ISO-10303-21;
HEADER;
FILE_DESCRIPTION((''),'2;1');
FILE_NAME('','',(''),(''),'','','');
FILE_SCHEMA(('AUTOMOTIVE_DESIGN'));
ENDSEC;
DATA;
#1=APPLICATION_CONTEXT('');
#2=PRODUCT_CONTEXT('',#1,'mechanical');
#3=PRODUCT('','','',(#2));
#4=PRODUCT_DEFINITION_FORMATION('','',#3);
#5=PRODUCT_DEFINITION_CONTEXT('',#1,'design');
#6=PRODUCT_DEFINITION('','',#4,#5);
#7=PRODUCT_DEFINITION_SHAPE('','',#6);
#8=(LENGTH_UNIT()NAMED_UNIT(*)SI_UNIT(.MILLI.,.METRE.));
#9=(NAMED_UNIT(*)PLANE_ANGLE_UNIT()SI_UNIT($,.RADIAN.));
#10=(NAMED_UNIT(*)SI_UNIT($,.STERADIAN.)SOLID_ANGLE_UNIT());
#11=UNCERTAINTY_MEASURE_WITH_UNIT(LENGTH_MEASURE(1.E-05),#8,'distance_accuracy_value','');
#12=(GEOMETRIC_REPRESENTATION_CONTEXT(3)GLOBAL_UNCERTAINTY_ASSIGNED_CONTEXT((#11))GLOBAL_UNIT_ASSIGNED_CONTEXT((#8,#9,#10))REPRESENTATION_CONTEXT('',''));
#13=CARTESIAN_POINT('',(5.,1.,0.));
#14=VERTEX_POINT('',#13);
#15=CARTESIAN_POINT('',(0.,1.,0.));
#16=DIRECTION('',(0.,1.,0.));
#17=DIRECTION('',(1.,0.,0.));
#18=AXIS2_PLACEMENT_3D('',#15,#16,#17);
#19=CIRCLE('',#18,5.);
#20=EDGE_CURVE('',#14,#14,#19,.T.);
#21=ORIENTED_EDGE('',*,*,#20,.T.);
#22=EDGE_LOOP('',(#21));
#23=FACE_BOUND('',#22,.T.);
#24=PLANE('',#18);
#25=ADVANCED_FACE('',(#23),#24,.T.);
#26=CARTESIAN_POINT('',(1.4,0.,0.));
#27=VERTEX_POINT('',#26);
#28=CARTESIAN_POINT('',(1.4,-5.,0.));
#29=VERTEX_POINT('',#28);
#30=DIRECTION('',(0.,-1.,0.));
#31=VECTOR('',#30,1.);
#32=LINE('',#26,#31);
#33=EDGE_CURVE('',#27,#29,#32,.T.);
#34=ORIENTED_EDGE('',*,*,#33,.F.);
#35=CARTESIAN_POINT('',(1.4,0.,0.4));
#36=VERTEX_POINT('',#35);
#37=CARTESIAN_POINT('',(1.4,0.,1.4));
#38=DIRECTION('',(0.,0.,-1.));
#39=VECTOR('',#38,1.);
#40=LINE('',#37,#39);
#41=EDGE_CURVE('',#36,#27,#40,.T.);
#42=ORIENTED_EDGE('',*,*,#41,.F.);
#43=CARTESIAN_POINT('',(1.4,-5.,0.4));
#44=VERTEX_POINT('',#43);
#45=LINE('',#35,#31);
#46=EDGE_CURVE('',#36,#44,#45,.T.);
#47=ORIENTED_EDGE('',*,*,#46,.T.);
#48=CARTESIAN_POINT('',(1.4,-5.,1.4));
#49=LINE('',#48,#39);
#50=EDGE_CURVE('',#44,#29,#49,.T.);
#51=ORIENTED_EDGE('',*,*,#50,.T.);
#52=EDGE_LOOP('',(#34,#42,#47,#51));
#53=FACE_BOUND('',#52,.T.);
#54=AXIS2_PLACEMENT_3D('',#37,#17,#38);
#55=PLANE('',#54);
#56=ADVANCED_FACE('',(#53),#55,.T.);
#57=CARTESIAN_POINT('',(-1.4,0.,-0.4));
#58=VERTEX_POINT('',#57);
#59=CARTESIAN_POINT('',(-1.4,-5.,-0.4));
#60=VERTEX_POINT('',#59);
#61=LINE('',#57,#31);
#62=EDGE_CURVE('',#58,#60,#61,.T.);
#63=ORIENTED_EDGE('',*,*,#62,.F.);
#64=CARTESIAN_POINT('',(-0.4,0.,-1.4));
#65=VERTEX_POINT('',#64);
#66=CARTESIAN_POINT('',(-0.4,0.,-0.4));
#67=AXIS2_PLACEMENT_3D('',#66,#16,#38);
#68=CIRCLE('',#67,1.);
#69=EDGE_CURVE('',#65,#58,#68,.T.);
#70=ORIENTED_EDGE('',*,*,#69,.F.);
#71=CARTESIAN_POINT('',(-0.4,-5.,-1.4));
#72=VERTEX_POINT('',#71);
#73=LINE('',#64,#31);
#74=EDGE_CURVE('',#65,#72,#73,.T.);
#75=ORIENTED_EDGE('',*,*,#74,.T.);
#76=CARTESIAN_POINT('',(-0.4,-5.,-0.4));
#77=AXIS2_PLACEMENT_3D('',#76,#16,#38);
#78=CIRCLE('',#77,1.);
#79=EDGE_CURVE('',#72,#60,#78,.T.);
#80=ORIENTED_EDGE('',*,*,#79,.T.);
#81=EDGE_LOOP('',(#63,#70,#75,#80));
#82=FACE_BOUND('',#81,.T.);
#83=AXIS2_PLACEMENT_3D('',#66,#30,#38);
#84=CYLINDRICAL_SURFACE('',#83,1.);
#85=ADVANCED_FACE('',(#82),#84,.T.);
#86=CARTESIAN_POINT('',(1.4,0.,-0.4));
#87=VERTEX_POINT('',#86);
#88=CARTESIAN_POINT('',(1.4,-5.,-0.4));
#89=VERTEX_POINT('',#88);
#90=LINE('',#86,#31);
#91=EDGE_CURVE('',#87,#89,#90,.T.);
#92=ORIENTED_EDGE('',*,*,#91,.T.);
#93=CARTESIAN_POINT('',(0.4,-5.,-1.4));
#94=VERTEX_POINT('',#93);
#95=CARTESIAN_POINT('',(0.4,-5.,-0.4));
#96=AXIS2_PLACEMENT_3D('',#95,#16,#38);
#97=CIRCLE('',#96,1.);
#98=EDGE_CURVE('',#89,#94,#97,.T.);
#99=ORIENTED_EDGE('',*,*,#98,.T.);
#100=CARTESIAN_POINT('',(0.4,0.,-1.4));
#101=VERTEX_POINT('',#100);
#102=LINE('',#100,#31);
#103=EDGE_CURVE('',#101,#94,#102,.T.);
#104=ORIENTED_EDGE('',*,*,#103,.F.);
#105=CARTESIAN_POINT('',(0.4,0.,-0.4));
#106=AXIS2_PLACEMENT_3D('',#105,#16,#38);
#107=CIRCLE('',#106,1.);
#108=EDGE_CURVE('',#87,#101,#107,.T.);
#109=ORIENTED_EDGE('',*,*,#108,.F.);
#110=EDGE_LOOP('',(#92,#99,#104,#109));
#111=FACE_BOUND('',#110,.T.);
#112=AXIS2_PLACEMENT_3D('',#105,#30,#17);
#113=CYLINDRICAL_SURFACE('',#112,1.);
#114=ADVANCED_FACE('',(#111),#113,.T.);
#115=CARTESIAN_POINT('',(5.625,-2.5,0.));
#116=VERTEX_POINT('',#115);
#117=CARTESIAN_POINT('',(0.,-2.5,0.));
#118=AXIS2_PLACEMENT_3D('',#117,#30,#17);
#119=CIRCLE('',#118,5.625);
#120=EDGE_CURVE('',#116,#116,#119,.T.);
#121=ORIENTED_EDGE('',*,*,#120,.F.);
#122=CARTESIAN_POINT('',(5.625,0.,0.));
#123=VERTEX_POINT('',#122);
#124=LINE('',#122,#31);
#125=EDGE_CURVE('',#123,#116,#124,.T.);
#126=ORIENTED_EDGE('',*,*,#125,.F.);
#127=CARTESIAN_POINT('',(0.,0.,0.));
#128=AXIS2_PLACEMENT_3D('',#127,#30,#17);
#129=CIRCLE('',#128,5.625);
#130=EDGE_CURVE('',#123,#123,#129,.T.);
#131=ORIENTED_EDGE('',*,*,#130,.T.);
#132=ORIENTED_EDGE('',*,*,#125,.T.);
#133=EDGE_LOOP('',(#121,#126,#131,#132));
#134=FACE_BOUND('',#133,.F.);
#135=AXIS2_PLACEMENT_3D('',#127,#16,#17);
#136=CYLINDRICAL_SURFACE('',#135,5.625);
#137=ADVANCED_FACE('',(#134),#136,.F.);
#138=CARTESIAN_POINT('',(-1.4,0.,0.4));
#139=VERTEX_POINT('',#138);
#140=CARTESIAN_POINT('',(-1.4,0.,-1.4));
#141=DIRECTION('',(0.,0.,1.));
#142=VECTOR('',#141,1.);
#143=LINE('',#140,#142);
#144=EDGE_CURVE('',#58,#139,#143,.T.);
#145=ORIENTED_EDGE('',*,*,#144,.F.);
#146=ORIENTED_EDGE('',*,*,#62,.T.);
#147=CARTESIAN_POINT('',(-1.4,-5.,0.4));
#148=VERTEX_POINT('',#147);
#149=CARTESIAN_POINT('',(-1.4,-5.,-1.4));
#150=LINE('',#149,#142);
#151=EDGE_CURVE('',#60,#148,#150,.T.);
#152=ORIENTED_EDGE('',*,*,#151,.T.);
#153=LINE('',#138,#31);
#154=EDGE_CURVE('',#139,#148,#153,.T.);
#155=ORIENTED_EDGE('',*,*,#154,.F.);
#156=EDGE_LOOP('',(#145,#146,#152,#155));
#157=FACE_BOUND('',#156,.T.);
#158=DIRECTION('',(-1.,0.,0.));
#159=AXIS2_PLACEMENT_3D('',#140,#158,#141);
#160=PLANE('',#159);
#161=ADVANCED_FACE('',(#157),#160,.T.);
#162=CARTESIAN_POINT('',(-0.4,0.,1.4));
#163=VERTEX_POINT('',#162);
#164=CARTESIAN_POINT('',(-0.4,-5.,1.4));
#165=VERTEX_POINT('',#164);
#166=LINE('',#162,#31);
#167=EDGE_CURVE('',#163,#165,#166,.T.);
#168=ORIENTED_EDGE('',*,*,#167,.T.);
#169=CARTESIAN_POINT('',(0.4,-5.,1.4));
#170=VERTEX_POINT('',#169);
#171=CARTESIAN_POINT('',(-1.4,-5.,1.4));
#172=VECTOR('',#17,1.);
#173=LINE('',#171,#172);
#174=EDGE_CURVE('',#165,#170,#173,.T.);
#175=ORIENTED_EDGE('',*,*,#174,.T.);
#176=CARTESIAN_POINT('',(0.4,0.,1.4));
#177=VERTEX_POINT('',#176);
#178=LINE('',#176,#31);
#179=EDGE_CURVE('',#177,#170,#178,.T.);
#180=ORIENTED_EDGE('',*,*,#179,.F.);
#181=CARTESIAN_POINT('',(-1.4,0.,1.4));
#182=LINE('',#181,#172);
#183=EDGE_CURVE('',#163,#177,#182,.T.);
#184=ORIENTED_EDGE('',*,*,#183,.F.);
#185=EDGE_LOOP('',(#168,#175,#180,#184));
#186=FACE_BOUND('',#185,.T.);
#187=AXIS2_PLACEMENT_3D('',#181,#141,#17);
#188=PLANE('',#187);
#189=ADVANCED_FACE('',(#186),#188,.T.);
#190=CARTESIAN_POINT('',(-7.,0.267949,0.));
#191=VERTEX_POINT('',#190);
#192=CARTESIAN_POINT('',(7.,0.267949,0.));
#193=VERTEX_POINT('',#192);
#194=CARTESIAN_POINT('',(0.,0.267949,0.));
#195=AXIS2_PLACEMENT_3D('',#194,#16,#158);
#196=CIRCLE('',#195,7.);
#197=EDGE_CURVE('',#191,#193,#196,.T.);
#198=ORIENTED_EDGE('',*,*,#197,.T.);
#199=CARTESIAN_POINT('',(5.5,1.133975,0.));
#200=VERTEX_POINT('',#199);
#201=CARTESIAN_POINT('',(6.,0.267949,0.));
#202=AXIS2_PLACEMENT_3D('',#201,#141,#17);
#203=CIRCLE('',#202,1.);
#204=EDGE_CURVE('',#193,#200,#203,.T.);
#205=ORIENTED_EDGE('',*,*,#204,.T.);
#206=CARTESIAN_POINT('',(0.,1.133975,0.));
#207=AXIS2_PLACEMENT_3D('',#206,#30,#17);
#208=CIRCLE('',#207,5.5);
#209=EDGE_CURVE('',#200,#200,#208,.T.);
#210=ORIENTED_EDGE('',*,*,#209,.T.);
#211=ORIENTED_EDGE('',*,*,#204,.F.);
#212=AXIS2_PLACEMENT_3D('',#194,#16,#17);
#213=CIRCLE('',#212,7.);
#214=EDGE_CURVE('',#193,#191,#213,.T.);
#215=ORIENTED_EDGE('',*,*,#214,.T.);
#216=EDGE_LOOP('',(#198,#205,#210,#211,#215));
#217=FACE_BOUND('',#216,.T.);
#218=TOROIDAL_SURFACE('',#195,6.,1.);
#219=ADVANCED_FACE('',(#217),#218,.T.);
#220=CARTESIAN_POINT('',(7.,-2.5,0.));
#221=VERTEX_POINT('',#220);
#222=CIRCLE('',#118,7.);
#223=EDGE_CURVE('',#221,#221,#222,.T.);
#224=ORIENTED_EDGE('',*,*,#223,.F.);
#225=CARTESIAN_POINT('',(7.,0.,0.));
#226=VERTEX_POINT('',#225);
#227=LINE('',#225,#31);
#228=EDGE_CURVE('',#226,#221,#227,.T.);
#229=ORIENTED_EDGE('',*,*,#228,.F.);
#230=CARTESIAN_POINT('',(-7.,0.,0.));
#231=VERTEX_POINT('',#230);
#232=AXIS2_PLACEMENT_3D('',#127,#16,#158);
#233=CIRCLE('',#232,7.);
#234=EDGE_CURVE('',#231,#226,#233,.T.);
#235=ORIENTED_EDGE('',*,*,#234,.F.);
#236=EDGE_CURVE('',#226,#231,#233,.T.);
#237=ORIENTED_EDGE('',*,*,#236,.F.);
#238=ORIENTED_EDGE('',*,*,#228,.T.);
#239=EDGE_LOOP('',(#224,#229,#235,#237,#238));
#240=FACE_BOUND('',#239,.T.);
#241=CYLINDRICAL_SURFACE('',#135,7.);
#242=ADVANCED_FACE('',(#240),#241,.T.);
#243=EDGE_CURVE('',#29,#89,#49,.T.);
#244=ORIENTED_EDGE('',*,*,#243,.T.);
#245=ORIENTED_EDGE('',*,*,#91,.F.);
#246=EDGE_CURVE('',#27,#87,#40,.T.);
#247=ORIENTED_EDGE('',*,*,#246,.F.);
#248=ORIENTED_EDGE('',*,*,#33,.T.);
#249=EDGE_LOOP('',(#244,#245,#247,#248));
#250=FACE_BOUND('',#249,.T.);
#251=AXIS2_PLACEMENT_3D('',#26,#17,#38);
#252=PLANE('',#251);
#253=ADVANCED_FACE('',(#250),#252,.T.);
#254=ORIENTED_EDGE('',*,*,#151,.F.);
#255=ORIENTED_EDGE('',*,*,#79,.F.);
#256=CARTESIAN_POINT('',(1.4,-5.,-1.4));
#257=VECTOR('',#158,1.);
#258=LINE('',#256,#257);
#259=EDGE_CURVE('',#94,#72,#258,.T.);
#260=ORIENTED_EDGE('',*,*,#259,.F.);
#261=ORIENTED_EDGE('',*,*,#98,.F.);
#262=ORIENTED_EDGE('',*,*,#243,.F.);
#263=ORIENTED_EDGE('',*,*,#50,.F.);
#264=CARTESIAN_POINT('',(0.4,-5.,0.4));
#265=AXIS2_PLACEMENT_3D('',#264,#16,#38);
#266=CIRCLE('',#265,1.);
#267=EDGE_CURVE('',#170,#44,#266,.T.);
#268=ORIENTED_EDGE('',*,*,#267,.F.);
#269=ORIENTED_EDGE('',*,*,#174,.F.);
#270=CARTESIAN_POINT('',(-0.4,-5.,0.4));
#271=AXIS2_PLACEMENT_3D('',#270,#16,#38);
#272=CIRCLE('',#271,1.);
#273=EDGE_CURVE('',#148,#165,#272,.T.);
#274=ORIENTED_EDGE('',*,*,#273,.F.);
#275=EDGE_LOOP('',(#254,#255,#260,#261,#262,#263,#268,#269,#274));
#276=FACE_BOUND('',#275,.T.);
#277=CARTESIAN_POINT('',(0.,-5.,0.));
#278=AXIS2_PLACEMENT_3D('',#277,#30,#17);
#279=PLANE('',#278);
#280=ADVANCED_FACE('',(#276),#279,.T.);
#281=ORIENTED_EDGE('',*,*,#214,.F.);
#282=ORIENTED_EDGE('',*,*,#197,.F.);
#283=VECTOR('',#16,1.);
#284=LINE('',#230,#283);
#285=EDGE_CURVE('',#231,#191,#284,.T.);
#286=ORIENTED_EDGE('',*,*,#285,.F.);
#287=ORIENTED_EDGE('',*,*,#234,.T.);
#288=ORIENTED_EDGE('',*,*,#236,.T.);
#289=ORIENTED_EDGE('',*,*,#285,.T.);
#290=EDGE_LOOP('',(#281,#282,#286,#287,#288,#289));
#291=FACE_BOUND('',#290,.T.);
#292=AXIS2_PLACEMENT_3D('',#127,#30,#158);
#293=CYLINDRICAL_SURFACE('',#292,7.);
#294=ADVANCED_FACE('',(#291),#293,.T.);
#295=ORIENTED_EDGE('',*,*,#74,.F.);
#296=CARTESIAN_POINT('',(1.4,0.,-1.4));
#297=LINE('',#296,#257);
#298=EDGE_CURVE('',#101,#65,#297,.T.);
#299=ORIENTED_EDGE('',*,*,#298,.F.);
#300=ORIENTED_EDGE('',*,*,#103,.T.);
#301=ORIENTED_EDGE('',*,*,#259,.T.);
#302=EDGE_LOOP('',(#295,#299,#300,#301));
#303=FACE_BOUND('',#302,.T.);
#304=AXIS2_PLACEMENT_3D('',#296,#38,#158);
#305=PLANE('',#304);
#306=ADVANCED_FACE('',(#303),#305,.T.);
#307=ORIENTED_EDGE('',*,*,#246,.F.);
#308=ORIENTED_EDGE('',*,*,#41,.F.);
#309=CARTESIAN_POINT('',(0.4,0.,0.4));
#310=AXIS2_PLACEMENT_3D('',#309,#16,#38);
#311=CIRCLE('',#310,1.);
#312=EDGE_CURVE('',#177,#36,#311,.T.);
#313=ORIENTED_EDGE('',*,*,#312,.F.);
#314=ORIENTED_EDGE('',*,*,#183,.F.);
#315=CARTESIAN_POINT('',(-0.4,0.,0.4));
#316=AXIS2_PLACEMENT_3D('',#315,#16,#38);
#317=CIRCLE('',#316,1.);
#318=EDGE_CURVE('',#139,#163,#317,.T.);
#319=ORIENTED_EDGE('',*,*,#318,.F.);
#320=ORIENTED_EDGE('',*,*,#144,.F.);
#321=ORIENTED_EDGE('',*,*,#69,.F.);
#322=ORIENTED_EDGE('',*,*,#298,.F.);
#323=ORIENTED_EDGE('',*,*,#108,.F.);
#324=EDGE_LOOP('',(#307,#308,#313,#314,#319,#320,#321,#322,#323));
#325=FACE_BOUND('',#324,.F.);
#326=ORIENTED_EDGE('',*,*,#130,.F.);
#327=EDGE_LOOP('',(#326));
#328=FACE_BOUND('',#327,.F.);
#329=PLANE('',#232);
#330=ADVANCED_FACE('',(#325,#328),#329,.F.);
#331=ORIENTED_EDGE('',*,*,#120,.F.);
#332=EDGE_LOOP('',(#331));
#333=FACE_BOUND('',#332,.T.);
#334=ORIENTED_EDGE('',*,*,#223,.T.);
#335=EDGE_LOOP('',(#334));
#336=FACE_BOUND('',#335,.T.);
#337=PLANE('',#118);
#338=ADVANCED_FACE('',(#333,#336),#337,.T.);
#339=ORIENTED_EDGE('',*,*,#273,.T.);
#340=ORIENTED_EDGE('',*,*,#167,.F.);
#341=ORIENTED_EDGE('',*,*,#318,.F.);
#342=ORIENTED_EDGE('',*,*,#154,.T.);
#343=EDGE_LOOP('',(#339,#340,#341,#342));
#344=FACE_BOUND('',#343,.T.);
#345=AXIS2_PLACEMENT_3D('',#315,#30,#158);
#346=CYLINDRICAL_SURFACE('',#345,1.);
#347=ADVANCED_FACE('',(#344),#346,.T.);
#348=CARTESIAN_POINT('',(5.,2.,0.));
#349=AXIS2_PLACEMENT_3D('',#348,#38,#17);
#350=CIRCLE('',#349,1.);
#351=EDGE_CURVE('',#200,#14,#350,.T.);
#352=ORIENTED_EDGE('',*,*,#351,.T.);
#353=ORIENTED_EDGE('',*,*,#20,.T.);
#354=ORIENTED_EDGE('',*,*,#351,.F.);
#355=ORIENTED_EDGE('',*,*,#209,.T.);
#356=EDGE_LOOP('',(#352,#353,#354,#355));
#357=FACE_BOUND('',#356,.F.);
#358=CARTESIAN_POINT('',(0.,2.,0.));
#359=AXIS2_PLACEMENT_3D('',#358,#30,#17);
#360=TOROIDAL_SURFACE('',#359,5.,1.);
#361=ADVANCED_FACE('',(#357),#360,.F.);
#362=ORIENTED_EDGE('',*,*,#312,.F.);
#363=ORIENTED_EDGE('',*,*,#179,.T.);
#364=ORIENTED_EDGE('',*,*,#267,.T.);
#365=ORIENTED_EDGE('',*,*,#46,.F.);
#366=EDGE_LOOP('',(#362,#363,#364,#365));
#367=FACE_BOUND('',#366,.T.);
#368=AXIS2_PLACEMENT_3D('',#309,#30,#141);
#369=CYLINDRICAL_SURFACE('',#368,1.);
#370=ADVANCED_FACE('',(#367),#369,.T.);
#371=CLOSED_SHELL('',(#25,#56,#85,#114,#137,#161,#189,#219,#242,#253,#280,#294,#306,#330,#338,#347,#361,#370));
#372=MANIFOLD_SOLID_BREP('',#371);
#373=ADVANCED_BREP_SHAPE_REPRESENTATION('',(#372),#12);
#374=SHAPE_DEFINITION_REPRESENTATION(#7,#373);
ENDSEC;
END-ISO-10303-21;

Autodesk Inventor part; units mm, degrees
ref_plane "YZ Plane" through (0, 0, 0) normal (1, 0, 0) x (0, 1, 0)
ref_plane "XZ Plane" through (0, 0, 0) normal (0, 1, 0) x (-1, 0, 0)
ref_plane "XY Plane" through (0, 0, 0) normal (0, 0, 1) x (1, 0, 0)
sketch "Boceto1" plane through (0, 0, 0) normal (0, 1, 0) x (-1, 0, 0)
  circle A0 centre (0, 0) radius 7
  dimension "d0" = 14
extrude "Extrusión1" add sketch "Boceto1" along normal blind 2
sketch "Boceto2" plane through (0, 0, 0) normal (0, -1, 0) x (1, 0, 0)
  circle A0 centre (0, 0) radius 5.625
  circle A1 centre (0, 0) radius 7
  dimension "d3" = 11.25
  dimension "d4" = 14
extrude "Extrusión2" add sketch "Boceto2" along normal blind 2.5
sketch "Boceto3" plane through (0, 0, 0) normal (0, -1, 0) x (1, 0, 0)
  line L0 (0, 0) -> (2.8, 0)
  line L1 (2.8, 0) -> (2.8, -1.4)
  line L2 (2.8, -1.4) -> (1.4, -1.4)
  line L3 (1.4, -1.4) -> (1.4, -2.8)
  line L4 (1.4, -2.8) -> (-1.4, -2.8)
  line L5 (-1.4, -2.8) -> (-1.4, -1.4)
  line L6 (-1.4, -1.4) -> (-2.8, -1.4)
  line L7 (-2.8, -1.4) -> (-2.8, 1.4)
  line L8 (-2.8, 1.4) -> (-1.4, 1.4)
  line L9 (-1.4, 1.4) -> (-1.4, 2.8)
  line L10 (-1.4, 2.8) -> (1.4, 2.8)
  line L11 (1.4, 2.8) -> (1.4, 1.4)
  line L12 (1.4, 1.4) -> (2.8, 1.4)
  line L13 (2.8, 1.4) -> (2.8, 0)
  line L14 (-1.4, 1.4) -> (1.4, 1.4)
  line L15 (1.4, 1.4) -> (1.4, -1.4)
  line L16 (1.4, -1.4) -> (-1.4, -1.4)
  line L17 (-1.4, -1.4) -> (-1.4, 1.4)
  line L18 (-1.4, 1.4) -> (1.4, 1.4)
  line L19 (1.4, 1.4) -> (1.4, -1.4)
  line L20 (1.4, -1.4) -> (-1.4, -1.4)
  line L21 (-1.4, -1.4) -> (-1.4, 1.4)
  dimension "d7" = 2.8
  dimension "d8" = 1.4
  dimension "d9" = 1.4
  dimension "d10" = 1.4
  dimension "d11" = 2.8
  dimension "d12" = 1.4
  dimension "d13" = 1.4
  dimension "d14" = 2.8
  dimension "d15" = 1.4
  dimension "d16" = 1.4
  dimension "d17" = 2.8
  dimension "d18" = 1.4
  dimension "d19" = 1.4
extrude "Extrusión3" add sketch "Boceto3" along normal blind 5 contours L15 L16 L17 L14
sketch "Boceto8" plane through (0, 2, 0) normal (0, 1, 0) x (1, 0, 0)
  circle A0 centre (0, 0) radius 6
  dimension "d55" = 12
extrude "Extrusión6" cut sketch "Boceto8" against normal blind 1
fillet "Empalme2" radius 1 3 edges at (-6, 1, 0) (-6, 2, 0) (7, 2, 0)
fillet "Empalme5" radius 1 4 edges at (1.4, -2.5, 1.4) (-1.4, -2.5, 1.4) (1.4, -2.5, -1.4) (-1.4, -2.5, -1.4)
properties part number "Boton Tapa"
